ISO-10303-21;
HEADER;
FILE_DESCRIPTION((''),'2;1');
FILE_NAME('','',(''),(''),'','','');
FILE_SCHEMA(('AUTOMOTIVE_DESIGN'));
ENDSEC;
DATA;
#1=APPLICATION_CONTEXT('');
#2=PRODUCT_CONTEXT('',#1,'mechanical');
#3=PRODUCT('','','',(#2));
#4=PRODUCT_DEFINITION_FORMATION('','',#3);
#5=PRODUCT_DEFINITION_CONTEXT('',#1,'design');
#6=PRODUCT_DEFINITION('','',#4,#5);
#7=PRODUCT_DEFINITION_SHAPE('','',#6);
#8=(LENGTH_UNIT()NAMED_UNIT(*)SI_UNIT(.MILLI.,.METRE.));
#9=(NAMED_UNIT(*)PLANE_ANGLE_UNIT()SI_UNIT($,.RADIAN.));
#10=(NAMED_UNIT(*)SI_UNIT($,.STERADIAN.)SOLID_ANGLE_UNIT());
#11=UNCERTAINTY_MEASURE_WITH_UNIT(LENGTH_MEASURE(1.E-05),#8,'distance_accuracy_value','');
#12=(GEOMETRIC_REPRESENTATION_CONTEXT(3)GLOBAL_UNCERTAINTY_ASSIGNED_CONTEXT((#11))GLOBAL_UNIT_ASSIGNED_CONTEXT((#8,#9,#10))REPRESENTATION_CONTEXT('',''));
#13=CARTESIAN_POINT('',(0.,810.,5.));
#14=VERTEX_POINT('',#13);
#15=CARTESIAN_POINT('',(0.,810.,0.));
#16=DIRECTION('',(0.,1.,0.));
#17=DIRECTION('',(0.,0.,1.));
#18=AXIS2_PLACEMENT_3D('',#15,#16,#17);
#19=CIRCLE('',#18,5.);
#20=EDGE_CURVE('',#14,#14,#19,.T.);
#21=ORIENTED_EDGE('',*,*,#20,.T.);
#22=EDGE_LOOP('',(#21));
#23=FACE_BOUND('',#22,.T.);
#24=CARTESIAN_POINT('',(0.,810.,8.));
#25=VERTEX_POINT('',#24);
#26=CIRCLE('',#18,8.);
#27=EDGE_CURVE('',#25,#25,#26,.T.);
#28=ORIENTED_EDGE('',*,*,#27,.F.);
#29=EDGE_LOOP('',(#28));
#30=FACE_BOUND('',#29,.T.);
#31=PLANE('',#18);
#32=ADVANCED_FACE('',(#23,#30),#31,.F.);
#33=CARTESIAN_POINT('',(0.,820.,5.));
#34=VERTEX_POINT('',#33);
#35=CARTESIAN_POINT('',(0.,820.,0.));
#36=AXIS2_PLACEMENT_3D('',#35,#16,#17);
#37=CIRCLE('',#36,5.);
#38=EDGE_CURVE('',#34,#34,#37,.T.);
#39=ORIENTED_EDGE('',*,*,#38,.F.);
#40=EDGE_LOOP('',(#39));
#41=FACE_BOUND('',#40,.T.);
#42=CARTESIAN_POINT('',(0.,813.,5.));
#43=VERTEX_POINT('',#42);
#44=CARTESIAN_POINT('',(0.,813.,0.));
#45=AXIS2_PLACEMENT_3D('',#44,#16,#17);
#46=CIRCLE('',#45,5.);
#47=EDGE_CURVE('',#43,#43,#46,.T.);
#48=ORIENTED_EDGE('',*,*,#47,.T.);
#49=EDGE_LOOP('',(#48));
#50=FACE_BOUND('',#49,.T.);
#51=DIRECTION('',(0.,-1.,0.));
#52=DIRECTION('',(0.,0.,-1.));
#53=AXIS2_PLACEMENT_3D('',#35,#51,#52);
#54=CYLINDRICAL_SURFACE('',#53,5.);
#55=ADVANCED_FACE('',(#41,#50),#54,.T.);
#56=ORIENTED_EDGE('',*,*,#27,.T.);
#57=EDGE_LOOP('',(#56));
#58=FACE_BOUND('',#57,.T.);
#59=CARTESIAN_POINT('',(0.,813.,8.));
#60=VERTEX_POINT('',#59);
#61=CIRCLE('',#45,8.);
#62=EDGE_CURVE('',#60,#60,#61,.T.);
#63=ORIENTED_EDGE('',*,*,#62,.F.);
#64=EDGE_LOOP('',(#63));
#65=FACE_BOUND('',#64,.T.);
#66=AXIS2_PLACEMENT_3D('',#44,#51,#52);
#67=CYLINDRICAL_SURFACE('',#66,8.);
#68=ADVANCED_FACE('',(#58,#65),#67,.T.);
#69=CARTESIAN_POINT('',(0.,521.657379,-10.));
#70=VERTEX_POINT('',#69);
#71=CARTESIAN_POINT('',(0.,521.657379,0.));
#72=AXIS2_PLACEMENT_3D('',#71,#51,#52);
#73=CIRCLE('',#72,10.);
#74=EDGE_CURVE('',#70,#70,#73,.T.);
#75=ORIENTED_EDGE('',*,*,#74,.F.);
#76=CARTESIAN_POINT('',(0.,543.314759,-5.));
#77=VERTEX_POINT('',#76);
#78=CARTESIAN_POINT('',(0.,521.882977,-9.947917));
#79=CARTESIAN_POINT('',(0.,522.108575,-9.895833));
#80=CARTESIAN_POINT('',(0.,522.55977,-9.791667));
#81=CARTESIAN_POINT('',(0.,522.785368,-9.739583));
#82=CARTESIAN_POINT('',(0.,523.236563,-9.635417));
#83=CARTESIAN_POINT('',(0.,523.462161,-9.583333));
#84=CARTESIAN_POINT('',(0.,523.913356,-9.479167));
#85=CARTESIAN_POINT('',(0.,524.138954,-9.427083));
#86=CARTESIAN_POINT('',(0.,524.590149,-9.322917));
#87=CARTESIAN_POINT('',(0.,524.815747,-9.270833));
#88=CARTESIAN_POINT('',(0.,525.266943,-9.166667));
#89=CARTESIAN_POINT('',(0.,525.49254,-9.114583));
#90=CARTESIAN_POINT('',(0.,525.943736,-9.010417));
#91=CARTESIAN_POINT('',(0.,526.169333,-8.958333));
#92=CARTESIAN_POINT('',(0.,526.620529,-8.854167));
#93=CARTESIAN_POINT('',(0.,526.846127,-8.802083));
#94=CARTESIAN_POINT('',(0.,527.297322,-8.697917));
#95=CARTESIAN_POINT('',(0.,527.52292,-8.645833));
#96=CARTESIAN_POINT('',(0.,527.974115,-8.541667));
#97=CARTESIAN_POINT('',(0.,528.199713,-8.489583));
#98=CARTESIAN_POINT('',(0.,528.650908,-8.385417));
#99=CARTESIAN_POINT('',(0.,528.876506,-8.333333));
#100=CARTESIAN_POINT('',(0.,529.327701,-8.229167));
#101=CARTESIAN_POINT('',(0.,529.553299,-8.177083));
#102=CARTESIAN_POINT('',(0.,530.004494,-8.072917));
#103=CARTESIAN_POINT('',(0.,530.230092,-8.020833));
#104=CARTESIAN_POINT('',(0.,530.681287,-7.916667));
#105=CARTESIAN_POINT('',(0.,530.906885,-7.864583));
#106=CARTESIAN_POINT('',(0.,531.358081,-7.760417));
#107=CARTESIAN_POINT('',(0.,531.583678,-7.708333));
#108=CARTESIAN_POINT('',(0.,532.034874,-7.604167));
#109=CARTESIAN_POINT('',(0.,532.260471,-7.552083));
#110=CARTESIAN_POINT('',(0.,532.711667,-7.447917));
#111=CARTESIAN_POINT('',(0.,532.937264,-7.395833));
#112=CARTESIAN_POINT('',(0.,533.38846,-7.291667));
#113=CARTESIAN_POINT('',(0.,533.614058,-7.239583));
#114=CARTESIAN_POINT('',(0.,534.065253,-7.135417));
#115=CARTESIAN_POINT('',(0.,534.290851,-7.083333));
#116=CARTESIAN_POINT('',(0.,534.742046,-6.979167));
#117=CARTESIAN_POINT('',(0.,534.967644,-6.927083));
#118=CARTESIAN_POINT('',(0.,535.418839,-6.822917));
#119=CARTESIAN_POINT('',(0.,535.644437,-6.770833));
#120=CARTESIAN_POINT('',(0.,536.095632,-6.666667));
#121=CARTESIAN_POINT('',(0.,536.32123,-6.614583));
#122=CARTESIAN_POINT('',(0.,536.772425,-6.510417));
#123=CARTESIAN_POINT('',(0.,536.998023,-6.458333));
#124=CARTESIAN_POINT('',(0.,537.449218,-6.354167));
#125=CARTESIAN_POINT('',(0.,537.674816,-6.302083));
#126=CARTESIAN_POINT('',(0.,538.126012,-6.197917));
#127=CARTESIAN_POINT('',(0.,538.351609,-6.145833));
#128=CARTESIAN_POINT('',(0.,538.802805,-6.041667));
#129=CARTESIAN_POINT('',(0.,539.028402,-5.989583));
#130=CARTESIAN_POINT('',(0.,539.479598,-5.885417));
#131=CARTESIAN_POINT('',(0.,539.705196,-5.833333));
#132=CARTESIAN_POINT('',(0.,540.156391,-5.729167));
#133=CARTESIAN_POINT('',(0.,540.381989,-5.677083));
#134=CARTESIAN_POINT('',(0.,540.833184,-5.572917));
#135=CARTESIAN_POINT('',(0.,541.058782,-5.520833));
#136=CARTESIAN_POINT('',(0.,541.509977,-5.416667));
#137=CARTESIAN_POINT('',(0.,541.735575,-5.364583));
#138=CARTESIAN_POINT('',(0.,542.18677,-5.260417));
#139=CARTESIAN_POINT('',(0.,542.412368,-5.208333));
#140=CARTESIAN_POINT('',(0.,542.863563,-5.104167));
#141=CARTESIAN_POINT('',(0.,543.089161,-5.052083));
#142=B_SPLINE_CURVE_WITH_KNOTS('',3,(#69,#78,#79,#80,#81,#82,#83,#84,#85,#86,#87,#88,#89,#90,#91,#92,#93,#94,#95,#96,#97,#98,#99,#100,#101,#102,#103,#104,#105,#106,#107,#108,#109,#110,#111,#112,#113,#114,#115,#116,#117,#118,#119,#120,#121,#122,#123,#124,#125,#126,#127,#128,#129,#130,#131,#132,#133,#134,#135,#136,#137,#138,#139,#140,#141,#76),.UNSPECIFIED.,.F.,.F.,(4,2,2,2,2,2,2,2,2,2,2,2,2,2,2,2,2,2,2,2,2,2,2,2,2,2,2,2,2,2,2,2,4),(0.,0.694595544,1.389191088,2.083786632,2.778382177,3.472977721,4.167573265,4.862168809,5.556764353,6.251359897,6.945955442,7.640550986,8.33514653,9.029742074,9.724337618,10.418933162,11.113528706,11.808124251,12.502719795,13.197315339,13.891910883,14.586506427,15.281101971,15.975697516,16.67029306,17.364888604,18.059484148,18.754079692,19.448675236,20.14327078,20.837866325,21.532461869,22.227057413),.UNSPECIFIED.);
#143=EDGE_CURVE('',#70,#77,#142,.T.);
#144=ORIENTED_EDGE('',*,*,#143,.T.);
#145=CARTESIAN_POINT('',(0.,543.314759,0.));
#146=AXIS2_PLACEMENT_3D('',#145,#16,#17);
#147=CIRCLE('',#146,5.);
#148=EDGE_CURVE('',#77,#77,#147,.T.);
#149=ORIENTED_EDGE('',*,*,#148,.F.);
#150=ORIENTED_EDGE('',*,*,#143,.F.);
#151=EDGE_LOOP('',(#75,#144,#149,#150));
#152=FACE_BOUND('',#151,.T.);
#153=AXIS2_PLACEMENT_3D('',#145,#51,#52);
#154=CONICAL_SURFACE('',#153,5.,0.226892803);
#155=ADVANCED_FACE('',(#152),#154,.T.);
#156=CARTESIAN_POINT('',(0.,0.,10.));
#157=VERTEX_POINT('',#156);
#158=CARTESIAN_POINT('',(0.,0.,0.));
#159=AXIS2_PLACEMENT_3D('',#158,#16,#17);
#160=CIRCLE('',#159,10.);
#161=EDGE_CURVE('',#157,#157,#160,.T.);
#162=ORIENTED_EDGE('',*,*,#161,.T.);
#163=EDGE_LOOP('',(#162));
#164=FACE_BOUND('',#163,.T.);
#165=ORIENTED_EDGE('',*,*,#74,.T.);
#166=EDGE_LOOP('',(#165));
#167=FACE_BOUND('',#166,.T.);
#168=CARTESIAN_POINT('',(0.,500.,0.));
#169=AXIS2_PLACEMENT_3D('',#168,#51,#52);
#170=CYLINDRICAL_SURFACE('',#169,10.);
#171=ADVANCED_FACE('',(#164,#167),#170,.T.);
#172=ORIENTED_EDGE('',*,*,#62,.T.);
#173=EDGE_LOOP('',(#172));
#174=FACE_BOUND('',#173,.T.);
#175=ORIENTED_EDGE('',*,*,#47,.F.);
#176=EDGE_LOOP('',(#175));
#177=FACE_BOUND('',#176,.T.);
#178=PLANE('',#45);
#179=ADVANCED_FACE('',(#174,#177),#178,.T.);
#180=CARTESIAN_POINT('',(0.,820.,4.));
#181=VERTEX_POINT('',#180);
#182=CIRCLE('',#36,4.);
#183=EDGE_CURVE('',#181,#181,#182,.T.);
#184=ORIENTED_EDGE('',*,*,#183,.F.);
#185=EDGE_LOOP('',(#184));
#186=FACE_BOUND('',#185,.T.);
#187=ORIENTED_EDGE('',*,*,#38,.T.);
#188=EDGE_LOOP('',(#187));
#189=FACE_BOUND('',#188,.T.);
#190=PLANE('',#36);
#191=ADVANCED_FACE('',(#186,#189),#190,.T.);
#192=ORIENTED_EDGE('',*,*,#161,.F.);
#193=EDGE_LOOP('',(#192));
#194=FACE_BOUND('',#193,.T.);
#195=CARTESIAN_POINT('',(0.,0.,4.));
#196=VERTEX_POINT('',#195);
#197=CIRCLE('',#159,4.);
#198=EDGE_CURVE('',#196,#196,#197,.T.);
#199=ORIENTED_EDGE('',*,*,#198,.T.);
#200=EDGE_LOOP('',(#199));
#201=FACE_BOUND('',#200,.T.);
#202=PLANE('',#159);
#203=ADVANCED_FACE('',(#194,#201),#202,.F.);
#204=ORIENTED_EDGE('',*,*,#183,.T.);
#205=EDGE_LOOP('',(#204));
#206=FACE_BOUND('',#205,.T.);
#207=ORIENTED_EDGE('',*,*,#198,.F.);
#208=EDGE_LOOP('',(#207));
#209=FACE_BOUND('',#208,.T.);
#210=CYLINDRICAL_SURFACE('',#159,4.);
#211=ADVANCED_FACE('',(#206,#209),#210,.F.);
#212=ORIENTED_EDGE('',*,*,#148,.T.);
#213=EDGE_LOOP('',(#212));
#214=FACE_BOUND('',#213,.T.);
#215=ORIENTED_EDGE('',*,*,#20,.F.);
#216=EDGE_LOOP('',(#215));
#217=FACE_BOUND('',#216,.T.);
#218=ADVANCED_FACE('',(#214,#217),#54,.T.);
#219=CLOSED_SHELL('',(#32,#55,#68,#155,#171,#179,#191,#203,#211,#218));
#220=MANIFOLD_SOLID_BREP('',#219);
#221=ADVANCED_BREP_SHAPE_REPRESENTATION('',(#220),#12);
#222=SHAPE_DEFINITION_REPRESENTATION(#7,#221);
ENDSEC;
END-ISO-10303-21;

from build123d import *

# Parameters (mm, degrees)
ESQUISSE1_R             = 5
BOSS_EXTRU_1_DEPTH      = 820
ESQUISSE2_R             = 10
BOSS_EXTRU_2_DEPTH      = 500
CHANFREIN1_SIZE         = 10
CHANFREIN1_SIZE_2       = 43.314758743
ESQUISSE3_R             = 4
ENL_V_MAT_EXTRU_1_DEPTH = 821.121942153
ESQUISSE4_R             = 8
ESQUISSE4_R_2           = 4.5
BOSS_EXTRU_3_DEPTH      = 3


with BuildPart() as part:
    # Esquisse1 → Boss.-Extru.1 (new body)
    with BuildSketch(Plane(origin=(0, 0, 0), x_dir=(1, 0, 0), z_dir=(0, 1, 0))):
        with Locations(Location((0, 0, 0), (0, 0, 270))):
            Circle(ESQUISSE1_R)
    extrude(amount=BOSS_EXTRU_1_DEPTH)

    # Esquisse2 → Boss.-Extru.2 (add)
    with BuildSketch(Plane(origin=(0, 0, 0), x_dir=(1, 0, 0), z_dir=(0, 1, 0))):
        with Locations(Location((0, 0, 0), (0, 0, 270))):
            Circle(ESQUISSE2_R)
    extrude(amount=BOSS_EXTRU_2_DEPTH)

    # Chanfrein1
    # the kernel refuses this chamfer: 43.314758743, 10 mm, written as the material it adds along each edge
    with BuildSketch(Plane(origin=(0, 500, 0), x_dir=(0, 0, 1), z_dir=(1, 0, 0))) as chanfrein1_piece_1_section:
        Polygon((5 + CHANFREIN1_SIZE, 0), (5, -CHANFREIN1_SIZE_2), (5, 0), align=None)
    chanfrein1_piece_1 = revolve(axis=Axis((0, 500, 0), (0, -1, 0)), mode=Mode.PRIVATE)
    chanfrein1_piece_1 = chanfrein1_piece_1 & Plane(origin=(0, 533.283833366, 0), x_dir=(0, 0, 1), z_dir=(0, -1, 0)) * Cylinder(10, 174, mode=Mode.PRIVATE)
    add(chanfrein1_piece_1)

    # Esquisse3 → Enlèv. mat.-Extru.1 (cut, through all)
    with BuildSketch(Plane(origin=(0, 820, 0), x_dir=(1, 0, 0), z_dir=(0, 1, 0))):
        with Locations(Location((0, 0, 0), (0, 0, 270))):
            Circle(ESQUISSE3_R)
    extrude(amount=-ENL_V_MAT_EXTRU_1_DEPTH, mode=Mode.SUBTRACT)

    # Esquisse4 → Boss.-Extru.3 (add)
    with BuildSketch(Plane(origin=(0, 810, 0), x_dir=(1, 0, 0), z_dir=(0, 1, 0))):
        with Locations(Location((0, 0, 0), (0, 0, 270))):
            Circle(ESQUISSE4_R)
        Circle(ESQUISSE4_R_2, mode=Mode.SUBTRACT)
    extrude(amount=BOSS_EXTRU_3_DEPTH)


solid = part.part
